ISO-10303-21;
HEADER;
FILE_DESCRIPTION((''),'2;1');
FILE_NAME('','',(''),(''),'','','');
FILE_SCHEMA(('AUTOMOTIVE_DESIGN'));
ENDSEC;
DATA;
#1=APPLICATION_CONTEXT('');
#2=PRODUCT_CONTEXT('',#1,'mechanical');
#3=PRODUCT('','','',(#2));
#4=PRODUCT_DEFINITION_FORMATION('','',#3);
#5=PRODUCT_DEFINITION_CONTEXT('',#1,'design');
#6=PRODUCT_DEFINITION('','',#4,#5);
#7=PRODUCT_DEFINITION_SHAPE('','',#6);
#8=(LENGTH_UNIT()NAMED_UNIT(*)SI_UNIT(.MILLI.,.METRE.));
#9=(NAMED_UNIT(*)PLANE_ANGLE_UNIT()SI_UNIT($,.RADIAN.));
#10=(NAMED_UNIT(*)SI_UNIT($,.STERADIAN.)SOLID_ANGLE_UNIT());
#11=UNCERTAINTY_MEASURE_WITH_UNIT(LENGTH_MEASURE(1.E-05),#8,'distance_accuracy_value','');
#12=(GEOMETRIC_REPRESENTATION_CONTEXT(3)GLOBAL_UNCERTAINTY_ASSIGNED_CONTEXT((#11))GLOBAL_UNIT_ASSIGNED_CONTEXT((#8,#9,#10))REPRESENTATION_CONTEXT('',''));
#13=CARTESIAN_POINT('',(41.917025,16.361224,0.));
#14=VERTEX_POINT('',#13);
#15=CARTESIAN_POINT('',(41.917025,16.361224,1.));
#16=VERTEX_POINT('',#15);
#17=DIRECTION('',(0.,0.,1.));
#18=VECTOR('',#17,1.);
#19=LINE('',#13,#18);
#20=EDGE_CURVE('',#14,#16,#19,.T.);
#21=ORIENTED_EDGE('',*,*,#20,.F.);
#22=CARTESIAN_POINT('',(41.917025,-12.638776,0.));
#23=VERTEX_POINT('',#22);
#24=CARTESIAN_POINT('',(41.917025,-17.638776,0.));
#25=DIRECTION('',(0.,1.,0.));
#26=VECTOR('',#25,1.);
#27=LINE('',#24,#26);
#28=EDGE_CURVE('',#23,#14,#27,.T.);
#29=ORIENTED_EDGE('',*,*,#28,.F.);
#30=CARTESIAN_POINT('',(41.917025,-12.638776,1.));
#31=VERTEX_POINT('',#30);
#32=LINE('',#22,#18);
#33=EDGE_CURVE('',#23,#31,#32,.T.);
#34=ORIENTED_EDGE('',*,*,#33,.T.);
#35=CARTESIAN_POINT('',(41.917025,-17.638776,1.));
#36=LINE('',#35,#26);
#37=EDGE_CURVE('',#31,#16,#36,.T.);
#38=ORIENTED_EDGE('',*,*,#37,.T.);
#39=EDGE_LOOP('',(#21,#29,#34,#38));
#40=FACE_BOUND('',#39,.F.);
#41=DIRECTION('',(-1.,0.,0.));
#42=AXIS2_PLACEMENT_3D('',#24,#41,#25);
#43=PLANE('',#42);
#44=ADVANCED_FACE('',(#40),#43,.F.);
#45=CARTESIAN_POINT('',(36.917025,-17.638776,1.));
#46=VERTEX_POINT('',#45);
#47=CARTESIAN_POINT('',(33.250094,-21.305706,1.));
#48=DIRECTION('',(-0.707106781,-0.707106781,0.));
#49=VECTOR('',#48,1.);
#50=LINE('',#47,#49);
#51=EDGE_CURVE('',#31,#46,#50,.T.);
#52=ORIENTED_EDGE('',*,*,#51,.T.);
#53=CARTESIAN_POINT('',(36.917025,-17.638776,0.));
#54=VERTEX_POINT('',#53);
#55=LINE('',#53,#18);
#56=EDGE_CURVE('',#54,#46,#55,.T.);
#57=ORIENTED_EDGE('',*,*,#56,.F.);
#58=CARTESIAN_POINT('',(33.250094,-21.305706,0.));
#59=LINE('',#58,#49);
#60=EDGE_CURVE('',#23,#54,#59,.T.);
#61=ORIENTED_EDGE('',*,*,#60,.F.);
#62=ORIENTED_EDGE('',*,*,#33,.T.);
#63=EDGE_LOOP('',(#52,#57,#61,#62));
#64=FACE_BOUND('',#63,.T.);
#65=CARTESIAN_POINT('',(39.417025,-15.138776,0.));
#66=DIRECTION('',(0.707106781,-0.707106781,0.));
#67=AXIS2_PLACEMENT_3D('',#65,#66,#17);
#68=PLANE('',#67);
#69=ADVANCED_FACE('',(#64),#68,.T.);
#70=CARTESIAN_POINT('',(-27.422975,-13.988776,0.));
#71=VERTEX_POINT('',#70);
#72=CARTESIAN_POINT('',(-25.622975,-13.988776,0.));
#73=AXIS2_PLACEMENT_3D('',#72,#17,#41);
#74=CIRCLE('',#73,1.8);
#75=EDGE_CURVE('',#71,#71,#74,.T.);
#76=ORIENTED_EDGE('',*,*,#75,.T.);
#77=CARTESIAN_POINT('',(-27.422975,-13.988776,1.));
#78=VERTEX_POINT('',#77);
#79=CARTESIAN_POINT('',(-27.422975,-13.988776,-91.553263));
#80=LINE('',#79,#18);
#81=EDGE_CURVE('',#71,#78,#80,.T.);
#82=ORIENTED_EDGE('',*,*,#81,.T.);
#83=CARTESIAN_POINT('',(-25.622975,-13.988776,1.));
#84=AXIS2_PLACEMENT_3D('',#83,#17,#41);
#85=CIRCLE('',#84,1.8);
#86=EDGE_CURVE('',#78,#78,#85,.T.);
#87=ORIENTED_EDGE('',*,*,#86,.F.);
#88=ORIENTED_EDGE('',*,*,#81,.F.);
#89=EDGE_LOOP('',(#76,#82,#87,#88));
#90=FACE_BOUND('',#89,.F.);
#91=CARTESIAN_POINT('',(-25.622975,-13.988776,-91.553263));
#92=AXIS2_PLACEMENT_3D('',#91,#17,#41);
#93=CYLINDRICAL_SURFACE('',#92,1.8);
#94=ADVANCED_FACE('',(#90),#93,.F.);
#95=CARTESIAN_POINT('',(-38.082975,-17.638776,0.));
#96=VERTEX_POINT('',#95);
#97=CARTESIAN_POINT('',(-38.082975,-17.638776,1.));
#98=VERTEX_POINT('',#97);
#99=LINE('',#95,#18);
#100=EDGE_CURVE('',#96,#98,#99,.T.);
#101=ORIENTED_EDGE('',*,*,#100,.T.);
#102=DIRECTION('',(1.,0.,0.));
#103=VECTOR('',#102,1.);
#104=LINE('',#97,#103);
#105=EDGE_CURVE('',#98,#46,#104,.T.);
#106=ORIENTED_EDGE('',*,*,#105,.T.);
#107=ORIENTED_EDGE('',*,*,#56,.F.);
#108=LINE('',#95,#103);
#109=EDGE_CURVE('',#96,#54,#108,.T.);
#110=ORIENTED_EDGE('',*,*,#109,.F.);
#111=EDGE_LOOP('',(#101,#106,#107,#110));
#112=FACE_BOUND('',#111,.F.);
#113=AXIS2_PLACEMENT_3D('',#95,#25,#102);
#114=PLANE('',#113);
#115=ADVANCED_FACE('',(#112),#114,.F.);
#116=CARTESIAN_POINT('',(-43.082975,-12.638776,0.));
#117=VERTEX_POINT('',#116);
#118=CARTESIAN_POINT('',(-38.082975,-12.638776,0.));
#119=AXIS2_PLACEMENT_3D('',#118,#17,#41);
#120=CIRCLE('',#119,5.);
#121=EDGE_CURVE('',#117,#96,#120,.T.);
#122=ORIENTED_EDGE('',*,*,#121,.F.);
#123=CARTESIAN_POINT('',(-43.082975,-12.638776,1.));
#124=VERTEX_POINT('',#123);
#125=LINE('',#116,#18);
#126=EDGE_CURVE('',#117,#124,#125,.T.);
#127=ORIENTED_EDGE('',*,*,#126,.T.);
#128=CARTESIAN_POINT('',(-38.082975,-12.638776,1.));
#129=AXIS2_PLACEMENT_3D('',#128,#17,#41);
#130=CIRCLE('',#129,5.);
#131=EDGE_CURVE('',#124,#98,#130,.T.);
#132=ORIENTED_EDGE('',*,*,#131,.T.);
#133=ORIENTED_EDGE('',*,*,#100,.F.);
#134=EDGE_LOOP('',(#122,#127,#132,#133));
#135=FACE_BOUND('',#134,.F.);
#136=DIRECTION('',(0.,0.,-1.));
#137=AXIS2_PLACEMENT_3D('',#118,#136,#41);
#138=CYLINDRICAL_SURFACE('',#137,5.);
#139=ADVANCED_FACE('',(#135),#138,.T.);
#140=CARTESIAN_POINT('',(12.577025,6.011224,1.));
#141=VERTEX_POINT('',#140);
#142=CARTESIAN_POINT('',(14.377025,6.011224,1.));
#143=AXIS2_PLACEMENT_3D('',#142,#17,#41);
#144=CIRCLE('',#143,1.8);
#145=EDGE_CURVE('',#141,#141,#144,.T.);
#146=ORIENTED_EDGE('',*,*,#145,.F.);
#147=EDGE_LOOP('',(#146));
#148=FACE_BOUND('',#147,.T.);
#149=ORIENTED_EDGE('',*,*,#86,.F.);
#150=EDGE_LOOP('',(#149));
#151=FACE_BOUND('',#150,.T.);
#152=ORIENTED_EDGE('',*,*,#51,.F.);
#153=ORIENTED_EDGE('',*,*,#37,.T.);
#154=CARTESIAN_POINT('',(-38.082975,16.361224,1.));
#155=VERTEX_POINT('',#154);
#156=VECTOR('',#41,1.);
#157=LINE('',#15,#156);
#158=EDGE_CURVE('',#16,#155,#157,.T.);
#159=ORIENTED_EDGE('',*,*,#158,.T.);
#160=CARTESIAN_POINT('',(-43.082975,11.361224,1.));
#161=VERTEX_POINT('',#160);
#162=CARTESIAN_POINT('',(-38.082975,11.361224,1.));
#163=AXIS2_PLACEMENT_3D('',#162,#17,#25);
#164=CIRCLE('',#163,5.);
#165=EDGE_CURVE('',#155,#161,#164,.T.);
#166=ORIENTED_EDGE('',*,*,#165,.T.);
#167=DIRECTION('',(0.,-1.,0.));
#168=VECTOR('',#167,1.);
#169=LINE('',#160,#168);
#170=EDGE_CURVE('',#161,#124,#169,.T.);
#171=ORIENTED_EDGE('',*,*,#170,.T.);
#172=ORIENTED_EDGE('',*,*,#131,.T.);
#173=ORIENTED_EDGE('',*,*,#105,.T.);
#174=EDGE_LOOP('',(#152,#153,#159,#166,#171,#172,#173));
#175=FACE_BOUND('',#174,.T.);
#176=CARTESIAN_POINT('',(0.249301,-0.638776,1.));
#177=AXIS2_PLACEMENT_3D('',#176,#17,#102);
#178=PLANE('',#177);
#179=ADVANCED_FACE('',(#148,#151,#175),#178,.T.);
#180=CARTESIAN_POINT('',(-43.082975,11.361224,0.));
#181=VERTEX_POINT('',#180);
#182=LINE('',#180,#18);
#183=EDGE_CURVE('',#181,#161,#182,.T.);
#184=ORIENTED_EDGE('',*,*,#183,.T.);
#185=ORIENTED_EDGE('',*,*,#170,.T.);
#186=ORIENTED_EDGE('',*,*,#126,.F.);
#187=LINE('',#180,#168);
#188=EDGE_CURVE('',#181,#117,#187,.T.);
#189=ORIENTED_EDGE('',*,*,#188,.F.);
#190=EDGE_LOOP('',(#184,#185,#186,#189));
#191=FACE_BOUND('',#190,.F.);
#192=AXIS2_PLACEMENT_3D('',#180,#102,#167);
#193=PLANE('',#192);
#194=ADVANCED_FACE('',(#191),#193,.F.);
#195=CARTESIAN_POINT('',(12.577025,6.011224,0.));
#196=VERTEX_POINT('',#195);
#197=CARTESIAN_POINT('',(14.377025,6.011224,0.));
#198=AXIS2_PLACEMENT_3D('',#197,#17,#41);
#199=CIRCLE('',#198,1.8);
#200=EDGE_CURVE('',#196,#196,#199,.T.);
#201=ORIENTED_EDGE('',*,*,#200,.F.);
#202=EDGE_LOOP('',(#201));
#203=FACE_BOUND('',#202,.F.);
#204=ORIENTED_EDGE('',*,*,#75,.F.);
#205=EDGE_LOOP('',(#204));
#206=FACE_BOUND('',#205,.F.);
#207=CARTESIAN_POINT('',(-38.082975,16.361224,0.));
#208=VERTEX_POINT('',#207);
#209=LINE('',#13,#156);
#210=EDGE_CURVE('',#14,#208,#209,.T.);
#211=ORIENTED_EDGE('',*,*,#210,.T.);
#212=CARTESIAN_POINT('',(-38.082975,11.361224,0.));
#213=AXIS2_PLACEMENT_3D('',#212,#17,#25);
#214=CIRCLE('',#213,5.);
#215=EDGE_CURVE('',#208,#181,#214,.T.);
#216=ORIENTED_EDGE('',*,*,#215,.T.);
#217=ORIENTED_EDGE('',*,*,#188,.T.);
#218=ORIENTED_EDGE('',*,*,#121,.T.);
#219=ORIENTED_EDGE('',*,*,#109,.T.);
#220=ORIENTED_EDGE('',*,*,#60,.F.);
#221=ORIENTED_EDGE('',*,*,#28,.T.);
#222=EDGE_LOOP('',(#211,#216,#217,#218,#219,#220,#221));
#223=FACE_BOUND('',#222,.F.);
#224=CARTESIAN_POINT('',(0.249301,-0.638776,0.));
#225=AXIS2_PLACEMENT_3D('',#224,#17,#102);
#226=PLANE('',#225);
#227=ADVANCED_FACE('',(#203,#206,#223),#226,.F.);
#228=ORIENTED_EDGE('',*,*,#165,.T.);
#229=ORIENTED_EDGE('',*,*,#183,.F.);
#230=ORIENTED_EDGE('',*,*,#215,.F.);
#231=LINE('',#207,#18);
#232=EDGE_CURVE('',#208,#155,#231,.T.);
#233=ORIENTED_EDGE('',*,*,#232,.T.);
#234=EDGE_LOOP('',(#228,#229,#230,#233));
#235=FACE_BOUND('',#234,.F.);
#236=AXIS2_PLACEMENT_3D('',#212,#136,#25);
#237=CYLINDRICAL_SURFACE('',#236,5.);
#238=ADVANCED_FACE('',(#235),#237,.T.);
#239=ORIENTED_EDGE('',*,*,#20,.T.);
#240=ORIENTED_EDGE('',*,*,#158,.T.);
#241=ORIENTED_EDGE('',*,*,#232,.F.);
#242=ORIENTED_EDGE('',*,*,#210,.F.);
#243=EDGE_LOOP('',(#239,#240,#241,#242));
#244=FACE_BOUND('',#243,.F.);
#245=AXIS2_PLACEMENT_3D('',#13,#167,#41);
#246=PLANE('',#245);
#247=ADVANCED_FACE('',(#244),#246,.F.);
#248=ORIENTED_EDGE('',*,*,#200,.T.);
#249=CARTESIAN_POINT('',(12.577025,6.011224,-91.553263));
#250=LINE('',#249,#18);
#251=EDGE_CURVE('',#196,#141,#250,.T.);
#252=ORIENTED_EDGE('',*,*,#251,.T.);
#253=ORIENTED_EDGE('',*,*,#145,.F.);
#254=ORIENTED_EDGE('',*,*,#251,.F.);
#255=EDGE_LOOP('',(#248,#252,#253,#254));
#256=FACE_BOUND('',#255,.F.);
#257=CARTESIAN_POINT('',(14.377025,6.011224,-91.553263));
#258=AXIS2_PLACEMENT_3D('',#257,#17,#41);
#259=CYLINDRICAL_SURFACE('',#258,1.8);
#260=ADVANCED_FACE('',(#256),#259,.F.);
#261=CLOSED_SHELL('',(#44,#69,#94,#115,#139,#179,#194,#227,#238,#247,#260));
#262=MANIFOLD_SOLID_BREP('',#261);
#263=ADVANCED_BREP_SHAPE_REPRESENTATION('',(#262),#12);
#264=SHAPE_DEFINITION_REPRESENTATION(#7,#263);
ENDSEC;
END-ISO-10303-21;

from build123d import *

# Parameters (mm, degrees)
F1_DEPTH = 1
F3_D     = 3.6
F4_SIZE  = 5


with BuildPart() as f1:
    # F0 (on Top) → F1 (new body)
    with BuildSketch(Plane.XY):
        with BuildLine():
            Line((41.9170247219, -17.6387755275), (41.9170247219, 16.3612244725))
            Line((41.9170247219, 16.3612244725), (-38.0829752781, 16.3612244725))
            ThreePointArc((-38.0829752781, 16.3612244725), (-41.618509184, 14.8967583785), (-43.0829752781, 11.3612244725))
            Line((-43.0829752781, 11.3612244725), (-43.0829752781, -12.6387755275))
            ThreePointArc((-43.0829752781, -12.6387755275), (-41.618509184, -16.1743094334), (-38.0829752781, -17.6387755275))
            Line((-38.0829752781, -17.6387755275), (41.9170247219, -17.6387755275))
        make_face()
    extrude(amount=F1_DEPTH)

    # F3 (through all)
    with Locations(Plane(origin=(0, 0, 0), x_dir=(1, 0, 0), z_dir=(0, 0, -1))):
        with Locations((-25.6229752781, 13.9887755275), (14.3770247219, -6.0112244725)):
            Hole(F3_D / 2)

    # F4
    f4_edges = [f1.edges().sort_by_distance(p)[0] for p in [
        (41.917025, -17.638776, 0.5),
    ]]
    chamfer(f4_edges, length=F4_SIZE)


solid = f1.part
